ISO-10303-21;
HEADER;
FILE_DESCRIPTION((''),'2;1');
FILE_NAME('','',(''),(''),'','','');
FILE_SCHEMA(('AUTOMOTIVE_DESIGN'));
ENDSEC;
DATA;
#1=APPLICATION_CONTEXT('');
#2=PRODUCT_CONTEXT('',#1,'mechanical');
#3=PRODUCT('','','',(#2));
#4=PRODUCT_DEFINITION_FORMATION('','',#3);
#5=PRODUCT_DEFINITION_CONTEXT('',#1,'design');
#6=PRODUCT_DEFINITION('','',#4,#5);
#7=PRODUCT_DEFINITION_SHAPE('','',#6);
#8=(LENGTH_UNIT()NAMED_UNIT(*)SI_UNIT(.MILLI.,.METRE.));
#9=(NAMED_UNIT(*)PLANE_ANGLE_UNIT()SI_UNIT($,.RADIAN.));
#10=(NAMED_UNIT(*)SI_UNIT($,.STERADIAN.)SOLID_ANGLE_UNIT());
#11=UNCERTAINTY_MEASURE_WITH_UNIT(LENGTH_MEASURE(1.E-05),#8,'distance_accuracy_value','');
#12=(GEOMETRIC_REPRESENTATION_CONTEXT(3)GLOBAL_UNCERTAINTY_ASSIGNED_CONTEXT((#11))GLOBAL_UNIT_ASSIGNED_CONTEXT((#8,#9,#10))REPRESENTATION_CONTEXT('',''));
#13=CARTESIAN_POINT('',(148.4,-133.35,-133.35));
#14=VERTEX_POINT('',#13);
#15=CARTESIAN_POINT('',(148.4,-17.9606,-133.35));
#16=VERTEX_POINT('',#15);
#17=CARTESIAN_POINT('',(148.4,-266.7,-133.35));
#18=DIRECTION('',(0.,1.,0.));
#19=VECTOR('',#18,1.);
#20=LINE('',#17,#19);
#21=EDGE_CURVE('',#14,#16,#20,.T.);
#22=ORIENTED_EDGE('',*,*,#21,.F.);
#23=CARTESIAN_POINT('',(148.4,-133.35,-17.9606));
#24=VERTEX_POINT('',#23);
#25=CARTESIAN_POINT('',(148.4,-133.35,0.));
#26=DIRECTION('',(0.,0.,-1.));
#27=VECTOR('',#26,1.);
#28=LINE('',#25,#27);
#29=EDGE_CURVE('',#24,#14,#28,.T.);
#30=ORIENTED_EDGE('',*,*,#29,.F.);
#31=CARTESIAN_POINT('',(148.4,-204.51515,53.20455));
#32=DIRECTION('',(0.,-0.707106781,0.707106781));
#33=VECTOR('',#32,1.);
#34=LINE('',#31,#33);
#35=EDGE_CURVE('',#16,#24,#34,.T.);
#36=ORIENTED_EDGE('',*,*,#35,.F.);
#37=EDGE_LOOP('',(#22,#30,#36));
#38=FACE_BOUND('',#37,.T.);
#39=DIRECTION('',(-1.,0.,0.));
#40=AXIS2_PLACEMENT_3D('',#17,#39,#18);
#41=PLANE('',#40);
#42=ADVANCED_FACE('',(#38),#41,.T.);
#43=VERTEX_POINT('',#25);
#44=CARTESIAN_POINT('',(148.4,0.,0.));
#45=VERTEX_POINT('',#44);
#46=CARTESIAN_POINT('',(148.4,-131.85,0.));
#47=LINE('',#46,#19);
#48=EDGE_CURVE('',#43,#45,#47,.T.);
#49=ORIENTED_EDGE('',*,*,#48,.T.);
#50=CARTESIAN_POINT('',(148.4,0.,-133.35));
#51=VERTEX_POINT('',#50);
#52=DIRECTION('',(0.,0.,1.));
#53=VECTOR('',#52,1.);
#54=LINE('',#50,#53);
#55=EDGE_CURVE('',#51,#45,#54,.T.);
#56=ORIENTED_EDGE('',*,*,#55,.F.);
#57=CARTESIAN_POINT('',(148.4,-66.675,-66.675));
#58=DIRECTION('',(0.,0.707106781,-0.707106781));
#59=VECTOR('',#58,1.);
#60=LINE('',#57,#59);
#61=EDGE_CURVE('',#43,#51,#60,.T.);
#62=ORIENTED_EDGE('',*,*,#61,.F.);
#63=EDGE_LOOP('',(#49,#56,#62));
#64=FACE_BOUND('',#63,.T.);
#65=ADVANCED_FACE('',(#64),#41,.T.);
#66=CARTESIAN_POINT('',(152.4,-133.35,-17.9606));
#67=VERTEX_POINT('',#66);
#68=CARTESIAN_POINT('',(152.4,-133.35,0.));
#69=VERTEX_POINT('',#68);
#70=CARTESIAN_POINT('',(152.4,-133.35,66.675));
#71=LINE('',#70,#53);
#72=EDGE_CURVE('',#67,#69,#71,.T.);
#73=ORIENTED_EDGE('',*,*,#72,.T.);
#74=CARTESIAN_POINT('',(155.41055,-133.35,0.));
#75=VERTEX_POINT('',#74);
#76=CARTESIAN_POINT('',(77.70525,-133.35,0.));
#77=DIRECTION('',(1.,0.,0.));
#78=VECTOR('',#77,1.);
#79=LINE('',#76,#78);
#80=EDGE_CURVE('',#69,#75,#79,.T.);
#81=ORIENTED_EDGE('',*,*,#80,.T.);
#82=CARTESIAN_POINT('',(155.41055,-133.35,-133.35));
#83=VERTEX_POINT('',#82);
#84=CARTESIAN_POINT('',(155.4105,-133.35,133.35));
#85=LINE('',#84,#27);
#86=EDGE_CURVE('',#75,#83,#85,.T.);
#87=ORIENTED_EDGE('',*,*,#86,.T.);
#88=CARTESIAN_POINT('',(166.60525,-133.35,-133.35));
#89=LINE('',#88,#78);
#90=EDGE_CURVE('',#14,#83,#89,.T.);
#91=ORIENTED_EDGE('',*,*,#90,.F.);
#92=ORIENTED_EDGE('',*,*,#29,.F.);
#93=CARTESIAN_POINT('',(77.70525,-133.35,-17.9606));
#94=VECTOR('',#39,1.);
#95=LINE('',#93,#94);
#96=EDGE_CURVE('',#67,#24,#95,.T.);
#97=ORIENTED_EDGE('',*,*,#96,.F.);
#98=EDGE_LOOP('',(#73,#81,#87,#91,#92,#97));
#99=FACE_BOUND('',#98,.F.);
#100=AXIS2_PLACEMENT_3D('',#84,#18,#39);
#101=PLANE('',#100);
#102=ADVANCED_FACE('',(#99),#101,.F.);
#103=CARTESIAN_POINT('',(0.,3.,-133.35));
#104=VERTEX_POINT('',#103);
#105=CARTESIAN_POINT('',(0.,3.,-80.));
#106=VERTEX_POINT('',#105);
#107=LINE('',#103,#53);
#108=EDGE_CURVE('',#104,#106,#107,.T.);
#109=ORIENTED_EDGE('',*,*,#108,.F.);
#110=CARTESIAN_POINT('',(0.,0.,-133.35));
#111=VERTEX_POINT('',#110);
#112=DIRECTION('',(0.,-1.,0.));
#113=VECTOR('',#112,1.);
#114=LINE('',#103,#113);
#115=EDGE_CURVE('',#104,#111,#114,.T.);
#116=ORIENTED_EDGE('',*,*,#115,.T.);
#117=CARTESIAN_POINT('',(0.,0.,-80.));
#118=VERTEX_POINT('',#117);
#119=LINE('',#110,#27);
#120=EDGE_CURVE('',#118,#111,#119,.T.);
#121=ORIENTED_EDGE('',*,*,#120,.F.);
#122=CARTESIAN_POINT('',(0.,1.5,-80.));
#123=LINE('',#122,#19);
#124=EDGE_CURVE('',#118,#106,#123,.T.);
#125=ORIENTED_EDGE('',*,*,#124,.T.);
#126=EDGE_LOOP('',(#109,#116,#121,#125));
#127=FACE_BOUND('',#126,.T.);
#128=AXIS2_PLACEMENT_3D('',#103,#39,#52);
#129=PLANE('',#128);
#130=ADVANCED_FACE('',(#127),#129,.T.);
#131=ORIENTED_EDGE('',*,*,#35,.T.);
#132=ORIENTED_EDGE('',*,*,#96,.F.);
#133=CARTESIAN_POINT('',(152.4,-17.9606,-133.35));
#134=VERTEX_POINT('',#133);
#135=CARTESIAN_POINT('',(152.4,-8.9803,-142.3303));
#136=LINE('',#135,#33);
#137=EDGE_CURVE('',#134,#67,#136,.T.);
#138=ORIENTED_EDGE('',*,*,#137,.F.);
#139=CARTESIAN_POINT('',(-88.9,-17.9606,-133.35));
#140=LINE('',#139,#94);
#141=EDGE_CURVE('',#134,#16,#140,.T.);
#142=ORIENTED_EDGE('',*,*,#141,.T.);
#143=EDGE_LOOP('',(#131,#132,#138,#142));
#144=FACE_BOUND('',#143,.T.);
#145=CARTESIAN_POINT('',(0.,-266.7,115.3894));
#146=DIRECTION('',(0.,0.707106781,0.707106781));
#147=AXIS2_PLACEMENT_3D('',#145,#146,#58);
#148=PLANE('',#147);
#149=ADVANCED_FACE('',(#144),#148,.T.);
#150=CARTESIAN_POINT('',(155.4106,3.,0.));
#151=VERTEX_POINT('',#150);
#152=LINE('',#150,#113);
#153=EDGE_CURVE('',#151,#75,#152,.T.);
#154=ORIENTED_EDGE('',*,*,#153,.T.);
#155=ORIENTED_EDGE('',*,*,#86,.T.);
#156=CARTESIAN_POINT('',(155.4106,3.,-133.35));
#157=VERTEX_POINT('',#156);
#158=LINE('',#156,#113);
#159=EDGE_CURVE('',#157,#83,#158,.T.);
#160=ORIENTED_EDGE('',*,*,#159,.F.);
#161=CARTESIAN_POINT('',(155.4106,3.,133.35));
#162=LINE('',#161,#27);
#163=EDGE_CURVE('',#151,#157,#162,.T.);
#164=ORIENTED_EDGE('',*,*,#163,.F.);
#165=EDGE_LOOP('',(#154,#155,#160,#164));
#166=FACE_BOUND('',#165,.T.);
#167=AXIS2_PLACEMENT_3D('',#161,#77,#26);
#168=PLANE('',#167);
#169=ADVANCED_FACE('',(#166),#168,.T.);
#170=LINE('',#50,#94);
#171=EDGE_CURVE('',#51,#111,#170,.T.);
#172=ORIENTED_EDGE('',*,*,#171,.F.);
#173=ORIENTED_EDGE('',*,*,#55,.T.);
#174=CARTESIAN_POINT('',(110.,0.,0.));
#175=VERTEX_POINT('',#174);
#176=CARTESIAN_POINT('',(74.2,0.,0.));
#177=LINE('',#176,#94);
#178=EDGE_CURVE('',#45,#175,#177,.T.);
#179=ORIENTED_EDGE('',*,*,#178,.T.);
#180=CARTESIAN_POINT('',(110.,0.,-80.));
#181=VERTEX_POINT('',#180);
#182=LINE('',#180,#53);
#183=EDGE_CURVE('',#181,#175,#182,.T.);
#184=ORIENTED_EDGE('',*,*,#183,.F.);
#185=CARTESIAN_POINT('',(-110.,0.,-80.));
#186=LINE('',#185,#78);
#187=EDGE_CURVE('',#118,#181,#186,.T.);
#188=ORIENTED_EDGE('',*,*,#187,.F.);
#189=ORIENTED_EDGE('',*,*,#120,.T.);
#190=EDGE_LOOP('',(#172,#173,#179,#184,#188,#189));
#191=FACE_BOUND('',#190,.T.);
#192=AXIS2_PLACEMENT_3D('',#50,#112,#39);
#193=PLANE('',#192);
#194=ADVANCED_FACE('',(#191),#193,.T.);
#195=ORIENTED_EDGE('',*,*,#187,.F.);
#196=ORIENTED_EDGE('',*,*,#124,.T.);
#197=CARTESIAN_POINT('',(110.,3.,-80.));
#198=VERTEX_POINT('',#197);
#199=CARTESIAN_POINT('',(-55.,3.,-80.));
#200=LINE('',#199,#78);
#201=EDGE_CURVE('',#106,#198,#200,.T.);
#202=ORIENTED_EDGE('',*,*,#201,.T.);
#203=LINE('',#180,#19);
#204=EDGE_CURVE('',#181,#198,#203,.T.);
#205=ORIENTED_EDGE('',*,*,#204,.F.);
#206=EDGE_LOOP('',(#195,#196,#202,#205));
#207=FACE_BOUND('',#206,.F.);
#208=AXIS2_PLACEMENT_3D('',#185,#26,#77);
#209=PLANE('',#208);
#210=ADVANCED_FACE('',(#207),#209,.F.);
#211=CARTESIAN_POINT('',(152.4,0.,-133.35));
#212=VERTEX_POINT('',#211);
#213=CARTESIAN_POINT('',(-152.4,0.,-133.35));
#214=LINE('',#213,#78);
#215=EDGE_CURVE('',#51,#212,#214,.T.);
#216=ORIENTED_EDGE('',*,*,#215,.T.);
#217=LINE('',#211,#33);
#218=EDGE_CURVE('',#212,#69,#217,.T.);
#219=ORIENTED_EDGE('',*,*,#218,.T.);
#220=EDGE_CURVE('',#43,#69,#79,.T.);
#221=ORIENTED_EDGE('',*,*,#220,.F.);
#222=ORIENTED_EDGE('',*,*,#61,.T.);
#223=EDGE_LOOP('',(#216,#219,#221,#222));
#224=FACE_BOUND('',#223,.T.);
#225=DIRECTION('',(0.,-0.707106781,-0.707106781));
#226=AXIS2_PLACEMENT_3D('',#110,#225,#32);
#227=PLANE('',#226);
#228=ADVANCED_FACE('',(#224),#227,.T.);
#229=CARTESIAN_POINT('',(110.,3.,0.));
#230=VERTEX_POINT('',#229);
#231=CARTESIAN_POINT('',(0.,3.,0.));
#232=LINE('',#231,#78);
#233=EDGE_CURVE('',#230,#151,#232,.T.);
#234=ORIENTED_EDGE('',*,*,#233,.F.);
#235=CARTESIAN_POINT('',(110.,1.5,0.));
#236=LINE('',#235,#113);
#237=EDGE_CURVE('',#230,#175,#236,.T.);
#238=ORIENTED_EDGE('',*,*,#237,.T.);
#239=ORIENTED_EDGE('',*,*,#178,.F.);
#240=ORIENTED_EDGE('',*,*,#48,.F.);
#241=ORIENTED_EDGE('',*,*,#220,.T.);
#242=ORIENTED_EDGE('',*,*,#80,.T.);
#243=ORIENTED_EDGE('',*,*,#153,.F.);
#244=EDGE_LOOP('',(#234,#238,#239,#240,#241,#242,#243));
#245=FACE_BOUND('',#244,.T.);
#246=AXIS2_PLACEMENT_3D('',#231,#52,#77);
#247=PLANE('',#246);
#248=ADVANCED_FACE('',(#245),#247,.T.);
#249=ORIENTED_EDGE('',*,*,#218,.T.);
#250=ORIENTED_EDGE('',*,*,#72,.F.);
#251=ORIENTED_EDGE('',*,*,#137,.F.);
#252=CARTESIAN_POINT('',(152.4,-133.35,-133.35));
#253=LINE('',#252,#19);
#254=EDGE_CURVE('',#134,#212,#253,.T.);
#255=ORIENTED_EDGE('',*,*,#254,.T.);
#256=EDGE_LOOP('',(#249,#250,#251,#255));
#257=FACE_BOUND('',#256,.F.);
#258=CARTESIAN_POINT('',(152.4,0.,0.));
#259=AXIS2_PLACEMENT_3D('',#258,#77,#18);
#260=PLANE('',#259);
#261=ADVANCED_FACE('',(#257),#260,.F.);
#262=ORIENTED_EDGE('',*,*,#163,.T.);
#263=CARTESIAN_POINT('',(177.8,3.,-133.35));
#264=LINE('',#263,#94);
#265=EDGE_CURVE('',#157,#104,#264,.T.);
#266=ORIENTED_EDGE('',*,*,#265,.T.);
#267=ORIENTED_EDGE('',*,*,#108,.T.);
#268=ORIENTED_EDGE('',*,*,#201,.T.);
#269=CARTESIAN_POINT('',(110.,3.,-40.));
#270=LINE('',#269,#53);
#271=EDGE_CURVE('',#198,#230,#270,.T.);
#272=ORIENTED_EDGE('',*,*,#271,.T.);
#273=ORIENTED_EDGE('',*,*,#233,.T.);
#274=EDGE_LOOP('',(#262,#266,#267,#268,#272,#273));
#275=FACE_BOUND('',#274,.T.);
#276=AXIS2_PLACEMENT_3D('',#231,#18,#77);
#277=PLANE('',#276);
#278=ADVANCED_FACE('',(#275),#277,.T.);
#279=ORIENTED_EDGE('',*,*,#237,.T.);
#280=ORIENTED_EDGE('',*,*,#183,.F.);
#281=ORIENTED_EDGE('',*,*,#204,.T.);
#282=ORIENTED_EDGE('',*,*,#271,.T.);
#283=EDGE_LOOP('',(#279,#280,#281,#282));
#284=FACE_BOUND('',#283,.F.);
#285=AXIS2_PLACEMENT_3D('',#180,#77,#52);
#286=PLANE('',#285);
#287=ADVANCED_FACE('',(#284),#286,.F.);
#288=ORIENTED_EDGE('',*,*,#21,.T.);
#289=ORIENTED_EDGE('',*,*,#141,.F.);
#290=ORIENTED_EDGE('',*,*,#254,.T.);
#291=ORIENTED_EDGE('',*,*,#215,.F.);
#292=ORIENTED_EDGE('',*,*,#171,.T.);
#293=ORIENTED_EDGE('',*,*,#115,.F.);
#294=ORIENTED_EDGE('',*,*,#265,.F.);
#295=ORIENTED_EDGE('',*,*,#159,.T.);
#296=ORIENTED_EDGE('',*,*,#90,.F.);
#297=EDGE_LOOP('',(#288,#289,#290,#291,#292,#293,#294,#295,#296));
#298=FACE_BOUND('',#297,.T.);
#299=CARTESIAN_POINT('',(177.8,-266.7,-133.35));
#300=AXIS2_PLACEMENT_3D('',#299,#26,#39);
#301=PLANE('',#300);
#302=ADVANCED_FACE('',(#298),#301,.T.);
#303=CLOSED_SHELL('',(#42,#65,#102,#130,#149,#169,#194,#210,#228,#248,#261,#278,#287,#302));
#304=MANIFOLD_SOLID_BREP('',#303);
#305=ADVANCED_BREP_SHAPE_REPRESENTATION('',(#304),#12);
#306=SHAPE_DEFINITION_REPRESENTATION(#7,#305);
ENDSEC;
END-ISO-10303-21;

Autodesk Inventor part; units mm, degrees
ref_plane "YZ Plane" through (0, 0, 0) normal (1, 0, 0) x (0, 1, 0)
ref_plane "XZ Plane" through (0, 0, 0) normal (0, 1, 0) x (-1, 0, 0)
ref_plane "XY Plane" through (0, 0, 0) normal (0, 0, 1) x (1, 0, 0)
sketch "Sketch1" plane through (0, 0, 0) normal (0, 1, 0) x (-1, 0, 0)
  line L0 (110, -80) -> (-110, -80)
  line L1 (-110, -80) -> (-110, 80)
  line L2 (-110, 80) -> (110, 80)
  line L3 (110, 80) -> (110, -80)
  line L4 (320.2117, -53.5522) -> (168.036, -53.5522) construction
  line L5 (168.036, -53.5522) -> (168.036, 90.1689) construction
  line L6 (168.036, 90.1689) -> (320.2117, 90.1689) construction
  line L7 (320.2117, 90.1689) -> (320.2117, -53.5522) construction
  line L8 (124.3, -89.75) -> (-124.3, -89.75) construction
  line L9 (-124.3, -89.75) -> (-124.3, 89.75) construction
  line L10 (-124.3, 89.75) -> (124.3, 89.75) construction
  line L11 (124.3, 89.75) -> (124.3, -89.75) construction
  line L12 (124.3, -89.75) -> (-124.3, 89.75) construction
  line L13 (-124.3, -89.75) -> (124.3, 89.75) construction
  line L14 (-152.4, -107.95) -> (152.4, -107.95)
  line L15 (152.4, -107.95) -> (152.4, 107.95)
  line L16 (152.4, 107.95) -> (-152.4, 107.95)
  line L17 (-152.4, 107.95) -> (-152.4, -107.95)
  line L18 (-152.4, -107.95) -> (152.4, 107.95) construction
  line L19 (152.4, -107.95) -> (-152.4, 107.95) construction
  line L20 (177.8, 133.35) -> (177.8, -133.35)
  line L21 (177.8, -133.35) -> (-177.8, -133.35)
  line L22 (-177.8, -133.35) -> (-177.8, 133.35)
  line L23 (-177.8, 133.35) -> (177.8, 133.35)
  point P0 (0, 0)
  dimension "d11" = 220
  dimension "d12" = 160
  dimension "d15" = 248.6
  dimension "d16" = 179.5
  dimension "d18" = 304.8
  dimension "d19" = 215.9
  dimension "d22" = 25.4
extrude "Top" add sketch "Sketch1" along normal blind 25.4 contours L17 L16 L15 L14 | L20 L21 L22 L23
sketch "Sketch3" plane through (177.8, 0, 133.35) normal (1, 0, 0) x (0, 0, -1)
  line L0 (0, 0) -> (0, 25.4) projected
  line L1 (266.7, 0) -> (266.7, 25.4) projected
  line L2 (0, 0) -> (266.7, 0)
  line L3 (266.7, 0) -> (266.7, -266.7)
  line L4 (266.7, -266.7) -> (0, -266.7)
  line L5 (0, -266.7) -> (0, 0)
  point P0 (133.35, 0)
  dimension "d25" = 266.7
extrude "Right" add sketch "Sketch3" against normal blind 50.8
sketch "Sketch4" plane through (-177.8, 0, -133.35) normal (-1, 0, 0) x (0, 0, 1)
  line L0 (0, 0) -> (0, 25.4) projected
  line L1 (266.7, -266.7) -> (266.7, 0) projected
  line L2 (0, 0) -> (266.7, 0)
  line L3 (266.7, 0) -> (266.7, -266.7)
  line L4 (266.7, -266.7) -> (0, -266.7)
  line L5 (0, -266.7) -> (0, 0)
  point P0 (133.35, 0)
  dimension "d28" = 266.7
extrude "Left" add sketch "Sketch4" against normal blind 50.8
sketch "Sketch5" plane through (0, 0, 0) normal (1, 0, 0) x (0, 1, 0)
  line L0 (-266.7, -133.35) -> (25.4, -133.35) projected
  line L1 (-266.7, 133.35) -> (-266.7, -133.35) projected
  line L2 (0, -133.35) -> (-266.7, 133.35)
  line L3 (-266.7, 133.35) -> (-275.6803, 124.3697)
  line L4 (-275.6803, 124.3697) -> (-8.9803, -142.3303)
  line L5 (-8.9803, -142.3303) -> (0, -133.35)
  point P0 (0, 0)
  dimension "d31" = 12.7
extrude "Plexiglass Cut" cut sketch "Sketch5" along normal mid plane 304.8 contours L4 L1 L2 L0 | L0 L5 L4 | L4 L3 L1
sketch "Sketch6" plane through (-177.8, -266.7, -133.35) normal (0, -1, 0) x (1, 0, 0)
  line L0 (0, 0) -> (0, 266.7) projected
  line L1 (355.6, 0) -> (0, 0) projected
  line L2 (0, 266.7) -> (355.6, 266.7)
  line L3 (355.6, 266.7) -> (355.6, 0)
  line L4 (355.6, 0) -> (0, 0)
  line L5 (0, 0) -> (0, 266.7)
  point P0 (177.8, 133.35)
extrude "Bottom" add sketch "Sketch6" along normal blind 25.4
sketch "Sketch9" plane through (0, 25.4, 0) normal (0, 1, 0) x (1, 0, 0)
  line L0 (177.8, -133.35) -> (127, -133.35) projected
  line L1 (177.8, 133.35) -> (-177.8, 133.35) projected
  line L2 (177.8, -133.35) -> (-177.8, -133.35)
  line L3 (-177.8, -133.35) -> (-177.8, 133.35)
  line L4 (-177.8, 133.35) -> (177.8, 133.35)
  line L5 (177.8, 133.35) -> (177.8, -133.35)
  point P0 (0, 0)
extrude "Top Flattening" cut sketch "Sketch9" against normal blind 22.4
sketch "Sketch10" plane through (0, 3, 0) normal (0, 1, 0) x (1, 0, 0)
  line L0 (-177.8, -133.35) -> (-177.8, 133.35) projected
  line L1 (-155.4106, 133.35) -> (-177.8, 133.35)
  line L2 (-177.8, 133.35) -> (-177.8, -133.35)
  line L3 (-177.8, -133.35) -> (-155.4106, -133.35)
  line L4 (-155.4106, -133.35) -> (-155.4106, 133.35)
  line L5 (177.8, 133.35) -> (177.8, -133.35)
  line L6 (177.8, -133.35) -> (155.4106, -133.35)
  line L7 (155.4106, -133.35) -> (155.4106, 133.35)
  line L8 (155.4106, 133.35) -> (177.8, 133.35)
  line L9 (152.4, -115.3895) -> (152.4, 133.35) projected
  point P0 (0, 0)
  point P1 (-177.8, 0)
  dimension "d48" = 22.3894
  dimension "d49" = 22.3894
extrude "Outer Side Flattening" cut sketch "Sketch10" against normal through all
sketch "Sketch11" plane through (-177.8, -292.1, -133.35) normal (0, -1, 0) x (1, 0, 0)
  line L0 (22.3894, 0) -> (333.2106, 0) projected
  line L1 (333.2106, 0) -> (22.3894, 0)
  line L2 (22.3894, 0) -> (22.3894, 266.7)
  line L3 (22.3894, 266.7) -> (333.2106, 266.7)
  line L4 (333.2106, 266.7) -> (333.2106, 0)
  point P0 (177.8, 133.35)
extrude "Bottom Flattening" cut sketch "Sketch11" against normal blind 22.4
sketch "Sketch12" plane through (155.4106, 3, -133.35) normal (0, 0, -1) x (-1, 0, 0)
  line L0 (155.4106, -3) -> (155.4106, -269.7) construction
  line L1 (7.0106, -269.7) -> (7.0106, -3)
  line L2 (7.0106, -3) -> (303.8106, -3)
  line L3 (303.8106, -3) -> (303.8106, -269.7)
  line L4 (303.8106, -269.7) -> (7.0106, -269.7)
  line L5 (7.0106, -269.7) -> (303.8106, -3) construction
  line L6 (7.0106, -3) -> (303.8106, -269.7) construction
  point P0 (155.4106, -136.35)
  point P1 (155.4106, -3)
  dimension "d54" = 296.8
extrude "Inner Flattening" cut sketch "Sketch12" against normal through all
sketch "Sketch13" plane through (-155.4106, 3, 133.35) normal (0, 0, 1) x (1, 0, 0)
  line L0 (310.8211, -272.7) -> (310.8211, 0) projected
  line L1 (0, -272.7) -> (310.8211, -272.7) projected
  line L2 (310.8211, -136.35) -> (0, -136.35)
  line L3 (0, -136.35) -> (0, -272.7)
  line L4 (0, -272.7) -> (310.8211, -272.7)
  line L5 (310.8211, -272.7) -> (310.8211, -136.35)
  point P0 (155.4106, -3)
extrude "Bottom Cut" cut sketch "Sketch13" against normal through all
sketch "Sketch14" plane through (0, 3, 0) normal (0, 1, 0) x (1, 0, 0)
  line L0 (-155.4106, 133.35) -> (155.4106, 133.35) projected
  line L1 (0, 0) -> (155.4106, 0)
  line L2 (155.4106, 0) -> (155.4106, 133.35)
  line L3 (155.4106, 133.35) -> (0, 133.35)
  line L4 (0, 133.35) -> (0, 0)
  line L5 (155.4106, -133.35) -> (-155.4106, -133.35) projected
  line L6 (155.4106, 133.35) -> (-155.4106, 133.35)
  line L7 (-155.4106, 133.35) -> (-155.4106, -133.35)
  line L8 (-155.4106, -133.35) -> (155.4106, -133.35)
  line L9 (155.4106, -133.35) -> (155.4106, 133.35)
extrude "Quarter Cut" cut sketch "Sketch14" against normal through all contours L0 L4 L1 L9 L5 L7
properties part number "Apple iPad 2022 Hologram"
